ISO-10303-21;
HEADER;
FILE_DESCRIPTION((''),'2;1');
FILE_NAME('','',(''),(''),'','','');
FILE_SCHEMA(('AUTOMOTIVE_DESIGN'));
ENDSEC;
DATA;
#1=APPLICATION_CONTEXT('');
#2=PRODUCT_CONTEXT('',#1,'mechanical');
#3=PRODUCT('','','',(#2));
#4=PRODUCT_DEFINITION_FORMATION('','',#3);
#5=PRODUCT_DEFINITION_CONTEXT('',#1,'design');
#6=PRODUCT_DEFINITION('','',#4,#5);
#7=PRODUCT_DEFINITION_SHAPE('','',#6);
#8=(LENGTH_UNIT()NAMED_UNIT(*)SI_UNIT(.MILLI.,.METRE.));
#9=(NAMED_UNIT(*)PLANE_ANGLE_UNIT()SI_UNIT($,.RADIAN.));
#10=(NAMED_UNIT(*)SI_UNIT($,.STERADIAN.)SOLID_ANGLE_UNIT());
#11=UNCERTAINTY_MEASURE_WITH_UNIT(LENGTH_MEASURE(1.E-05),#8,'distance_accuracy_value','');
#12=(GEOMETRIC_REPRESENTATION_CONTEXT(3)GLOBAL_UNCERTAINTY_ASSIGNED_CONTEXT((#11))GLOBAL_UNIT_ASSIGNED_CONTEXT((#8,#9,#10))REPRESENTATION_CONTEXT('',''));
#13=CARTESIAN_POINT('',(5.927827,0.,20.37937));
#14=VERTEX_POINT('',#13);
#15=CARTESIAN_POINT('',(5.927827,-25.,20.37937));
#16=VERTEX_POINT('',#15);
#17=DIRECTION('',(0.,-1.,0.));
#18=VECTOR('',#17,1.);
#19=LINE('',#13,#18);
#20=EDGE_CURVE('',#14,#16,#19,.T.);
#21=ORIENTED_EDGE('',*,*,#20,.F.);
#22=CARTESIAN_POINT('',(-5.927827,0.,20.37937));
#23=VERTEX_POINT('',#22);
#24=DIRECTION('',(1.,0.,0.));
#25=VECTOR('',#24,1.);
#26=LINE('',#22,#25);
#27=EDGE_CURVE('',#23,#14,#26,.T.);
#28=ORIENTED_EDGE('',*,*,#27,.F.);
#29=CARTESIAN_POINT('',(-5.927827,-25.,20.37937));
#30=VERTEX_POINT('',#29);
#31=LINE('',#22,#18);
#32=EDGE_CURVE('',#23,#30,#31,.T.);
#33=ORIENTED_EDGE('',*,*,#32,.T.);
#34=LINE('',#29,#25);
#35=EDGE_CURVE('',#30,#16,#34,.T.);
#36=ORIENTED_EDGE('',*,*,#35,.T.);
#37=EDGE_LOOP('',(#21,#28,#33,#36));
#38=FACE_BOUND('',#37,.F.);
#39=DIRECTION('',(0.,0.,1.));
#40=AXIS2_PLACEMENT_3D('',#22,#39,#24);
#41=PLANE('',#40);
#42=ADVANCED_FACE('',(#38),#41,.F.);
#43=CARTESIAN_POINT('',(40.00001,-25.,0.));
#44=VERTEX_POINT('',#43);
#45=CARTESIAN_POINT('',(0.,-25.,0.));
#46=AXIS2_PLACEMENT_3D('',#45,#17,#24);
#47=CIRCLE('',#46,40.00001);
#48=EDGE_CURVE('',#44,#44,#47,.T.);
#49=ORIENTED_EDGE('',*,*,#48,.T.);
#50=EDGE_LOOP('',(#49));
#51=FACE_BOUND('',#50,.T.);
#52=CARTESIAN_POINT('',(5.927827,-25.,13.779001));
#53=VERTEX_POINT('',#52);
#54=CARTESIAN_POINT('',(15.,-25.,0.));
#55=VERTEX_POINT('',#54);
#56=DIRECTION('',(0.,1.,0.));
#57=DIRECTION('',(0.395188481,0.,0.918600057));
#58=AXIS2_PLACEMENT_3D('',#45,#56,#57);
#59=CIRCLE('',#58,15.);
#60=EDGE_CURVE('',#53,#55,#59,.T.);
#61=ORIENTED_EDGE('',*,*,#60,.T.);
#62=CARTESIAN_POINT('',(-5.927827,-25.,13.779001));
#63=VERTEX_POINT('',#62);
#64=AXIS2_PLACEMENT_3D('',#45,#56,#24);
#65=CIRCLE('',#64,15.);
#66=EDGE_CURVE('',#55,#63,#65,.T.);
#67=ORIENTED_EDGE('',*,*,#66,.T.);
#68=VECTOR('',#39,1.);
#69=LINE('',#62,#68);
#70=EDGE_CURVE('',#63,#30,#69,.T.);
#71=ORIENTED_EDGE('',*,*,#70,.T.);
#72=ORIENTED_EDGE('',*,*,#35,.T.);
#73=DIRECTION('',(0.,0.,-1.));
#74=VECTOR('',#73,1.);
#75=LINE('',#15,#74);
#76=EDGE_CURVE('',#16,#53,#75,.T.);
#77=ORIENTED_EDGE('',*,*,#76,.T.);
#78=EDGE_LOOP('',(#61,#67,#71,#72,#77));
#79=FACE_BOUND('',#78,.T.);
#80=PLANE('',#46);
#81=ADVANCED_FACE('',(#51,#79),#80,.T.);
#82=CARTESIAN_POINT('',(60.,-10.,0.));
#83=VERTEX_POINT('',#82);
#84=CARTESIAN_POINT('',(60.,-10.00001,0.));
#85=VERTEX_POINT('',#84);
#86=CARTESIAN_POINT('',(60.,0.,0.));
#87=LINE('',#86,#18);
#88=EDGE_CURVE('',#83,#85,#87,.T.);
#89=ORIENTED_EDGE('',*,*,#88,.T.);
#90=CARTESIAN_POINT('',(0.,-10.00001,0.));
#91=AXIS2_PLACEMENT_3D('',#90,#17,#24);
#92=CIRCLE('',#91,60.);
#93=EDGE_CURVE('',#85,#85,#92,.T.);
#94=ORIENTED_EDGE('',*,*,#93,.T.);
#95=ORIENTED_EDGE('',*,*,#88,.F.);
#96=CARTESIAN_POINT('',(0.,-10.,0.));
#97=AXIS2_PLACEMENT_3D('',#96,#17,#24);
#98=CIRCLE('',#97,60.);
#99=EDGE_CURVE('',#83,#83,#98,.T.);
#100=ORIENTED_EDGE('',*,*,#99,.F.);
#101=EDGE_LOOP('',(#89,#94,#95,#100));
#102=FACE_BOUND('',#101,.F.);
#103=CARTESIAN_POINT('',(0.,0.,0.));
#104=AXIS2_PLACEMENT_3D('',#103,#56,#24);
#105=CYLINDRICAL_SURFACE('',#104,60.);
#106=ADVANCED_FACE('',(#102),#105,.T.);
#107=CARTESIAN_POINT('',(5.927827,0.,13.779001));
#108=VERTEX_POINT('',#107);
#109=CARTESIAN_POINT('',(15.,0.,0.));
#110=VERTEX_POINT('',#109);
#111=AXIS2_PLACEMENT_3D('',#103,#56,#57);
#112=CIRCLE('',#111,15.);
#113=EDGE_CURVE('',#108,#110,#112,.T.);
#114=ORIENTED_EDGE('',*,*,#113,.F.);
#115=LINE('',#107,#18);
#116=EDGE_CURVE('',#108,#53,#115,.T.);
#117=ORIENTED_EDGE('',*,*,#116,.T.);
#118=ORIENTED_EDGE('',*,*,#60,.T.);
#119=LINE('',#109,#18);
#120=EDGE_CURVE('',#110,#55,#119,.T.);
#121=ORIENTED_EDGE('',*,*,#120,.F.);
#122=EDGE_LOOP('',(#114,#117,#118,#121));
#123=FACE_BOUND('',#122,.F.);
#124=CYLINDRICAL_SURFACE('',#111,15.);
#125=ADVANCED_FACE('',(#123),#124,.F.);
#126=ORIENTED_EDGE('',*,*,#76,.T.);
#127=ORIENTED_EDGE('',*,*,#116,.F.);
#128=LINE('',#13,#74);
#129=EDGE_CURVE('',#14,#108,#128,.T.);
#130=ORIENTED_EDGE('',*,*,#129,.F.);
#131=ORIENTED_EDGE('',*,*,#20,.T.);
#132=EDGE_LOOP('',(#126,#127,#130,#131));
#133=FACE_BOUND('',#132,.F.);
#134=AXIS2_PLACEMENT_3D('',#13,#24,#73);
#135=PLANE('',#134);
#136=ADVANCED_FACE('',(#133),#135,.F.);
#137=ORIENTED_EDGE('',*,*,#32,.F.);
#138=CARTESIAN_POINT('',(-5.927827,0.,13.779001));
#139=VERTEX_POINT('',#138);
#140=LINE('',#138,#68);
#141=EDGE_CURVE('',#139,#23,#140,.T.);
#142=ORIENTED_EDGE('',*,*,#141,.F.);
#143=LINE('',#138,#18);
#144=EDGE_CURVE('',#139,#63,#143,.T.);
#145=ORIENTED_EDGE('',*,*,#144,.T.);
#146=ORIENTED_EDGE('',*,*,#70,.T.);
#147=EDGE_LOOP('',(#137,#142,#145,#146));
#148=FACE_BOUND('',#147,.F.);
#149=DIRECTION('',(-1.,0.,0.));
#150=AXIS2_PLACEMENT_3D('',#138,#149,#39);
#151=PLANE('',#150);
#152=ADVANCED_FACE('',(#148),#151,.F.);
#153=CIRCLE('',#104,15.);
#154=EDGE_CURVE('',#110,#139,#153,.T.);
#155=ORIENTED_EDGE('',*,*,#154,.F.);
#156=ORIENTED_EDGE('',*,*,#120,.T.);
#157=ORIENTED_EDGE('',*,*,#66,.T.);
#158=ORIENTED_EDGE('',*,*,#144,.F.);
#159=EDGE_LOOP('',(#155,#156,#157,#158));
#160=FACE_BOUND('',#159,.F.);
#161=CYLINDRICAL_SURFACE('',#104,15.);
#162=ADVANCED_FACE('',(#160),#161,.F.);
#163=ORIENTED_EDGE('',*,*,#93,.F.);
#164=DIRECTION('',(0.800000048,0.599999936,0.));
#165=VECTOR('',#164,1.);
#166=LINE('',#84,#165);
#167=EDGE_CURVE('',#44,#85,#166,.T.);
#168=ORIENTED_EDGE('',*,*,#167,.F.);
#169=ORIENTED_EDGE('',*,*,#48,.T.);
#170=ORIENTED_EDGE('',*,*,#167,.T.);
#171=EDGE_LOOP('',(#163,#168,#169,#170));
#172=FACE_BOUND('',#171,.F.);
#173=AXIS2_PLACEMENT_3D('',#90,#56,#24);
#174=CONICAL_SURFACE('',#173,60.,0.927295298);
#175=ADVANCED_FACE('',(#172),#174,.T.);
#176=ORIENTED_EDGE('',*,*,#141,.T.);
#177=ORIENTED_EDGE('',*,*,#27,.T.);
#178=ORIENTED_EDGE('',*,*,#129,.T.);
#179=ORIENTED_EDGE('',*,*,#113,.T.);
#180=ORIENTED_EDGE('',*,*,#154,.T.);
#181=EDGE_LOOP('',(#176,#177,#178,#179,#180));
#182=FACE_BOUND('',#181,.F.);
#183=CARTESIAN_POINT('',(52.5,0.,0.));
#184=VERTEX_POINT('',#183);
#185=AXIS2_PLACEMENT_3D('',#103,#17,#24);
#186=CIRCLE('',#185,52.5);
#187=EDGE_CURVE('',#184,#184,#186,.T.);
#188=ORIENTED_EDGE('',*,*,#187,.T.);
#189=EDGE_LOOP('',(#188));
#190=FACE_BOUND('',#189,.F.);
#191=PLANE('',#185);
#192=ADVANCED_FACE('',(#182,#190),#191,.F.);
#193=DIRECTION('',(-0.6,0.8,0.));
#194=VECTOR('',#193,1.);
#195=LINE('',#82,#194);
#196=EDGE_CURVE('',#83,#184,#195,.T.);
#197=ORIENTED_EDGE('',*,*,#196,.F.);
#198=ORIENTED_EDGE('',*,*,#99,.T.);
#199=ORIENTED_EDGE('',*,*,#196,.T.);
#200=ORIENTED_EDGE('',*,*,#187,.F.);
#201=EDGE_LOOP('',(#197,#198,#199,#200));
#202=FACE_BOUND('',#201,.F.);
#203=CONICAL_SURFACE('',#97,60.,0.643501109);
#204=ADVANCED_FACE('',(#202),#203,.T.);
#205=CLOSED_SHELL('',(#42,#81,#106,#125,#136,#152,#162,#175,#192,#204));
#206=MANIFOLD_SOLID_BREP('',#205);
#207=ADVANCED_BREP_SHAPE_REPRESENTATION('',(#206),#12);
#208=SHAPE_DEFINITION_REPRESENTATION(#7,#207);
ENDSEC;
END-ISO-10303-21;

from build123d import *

# Parameters (mm, degrees)
F0_R     = 60
F1_DEPTH = 25
F2_SIZE2 = 7.5
F2_SIZE  = 10
F3_SIZE2 = 14.99999
F3_SIZE  = 19.99999


# Not quite as in the source:
# - a fillet or chamfer is up to 0.001 mm smaller than in the source, because OpenCascade refuses the exact size


with BuildPart() as f1:
    # F0 (on Front) → F1 (new body)
    with BuildSketch(Plane.XZ):
        Circle(F0_R)
        with BuildLine():
            ThreePointArc((5.9278272092, 13.7790008556), (12.5283160907, 8.2487148048), (15, 0))
            ThreePointArc((15, 0), (-8.2487148048, -12.5283160907), (-5.9278272092, 13.7790008556))
            Line((-5.9278272092, 13.7790008556), (-5.9278272092, 20.3793700784))
            Line((-5.9278272092, 20.3793700784), (5.9278272092, 20.3793700784))
            Line((5.9278272092, 20.3793700784), (5.9278272092, 13.7790008556))
        make_face(mode=Mode.SUBTRACT)
    extrude(amount=F1_DEPTH)

    # F2
    f2_edges = [f1.edges().sort_by_distance(p)[0] for p in [
        (-60, 0, 0),
    ]]
    f2_side = f1.faces().sort_by_distance((-60, -12.5, 0))[0]
    chamfer(f2_edges, length=F2_SIZE, length2=F2_SIZE2, reference=f2_side)

    # F3 (size 20 and 15 in the source; OpenCascade refuses exactly that, so slightly less here)
    f3_edges = [f1.edges().sort_by_distance(p)[0] for p in [
        (-60, -25, 0),
    ]]
    f3_side = f1.faces().sort_by_distance((-58.302944, -25, 0))[0]
    chamfer(f3_edges, length=F3_SIZE, length2=F3_SIZE2, reference=f3_side)


solid = f1.part
